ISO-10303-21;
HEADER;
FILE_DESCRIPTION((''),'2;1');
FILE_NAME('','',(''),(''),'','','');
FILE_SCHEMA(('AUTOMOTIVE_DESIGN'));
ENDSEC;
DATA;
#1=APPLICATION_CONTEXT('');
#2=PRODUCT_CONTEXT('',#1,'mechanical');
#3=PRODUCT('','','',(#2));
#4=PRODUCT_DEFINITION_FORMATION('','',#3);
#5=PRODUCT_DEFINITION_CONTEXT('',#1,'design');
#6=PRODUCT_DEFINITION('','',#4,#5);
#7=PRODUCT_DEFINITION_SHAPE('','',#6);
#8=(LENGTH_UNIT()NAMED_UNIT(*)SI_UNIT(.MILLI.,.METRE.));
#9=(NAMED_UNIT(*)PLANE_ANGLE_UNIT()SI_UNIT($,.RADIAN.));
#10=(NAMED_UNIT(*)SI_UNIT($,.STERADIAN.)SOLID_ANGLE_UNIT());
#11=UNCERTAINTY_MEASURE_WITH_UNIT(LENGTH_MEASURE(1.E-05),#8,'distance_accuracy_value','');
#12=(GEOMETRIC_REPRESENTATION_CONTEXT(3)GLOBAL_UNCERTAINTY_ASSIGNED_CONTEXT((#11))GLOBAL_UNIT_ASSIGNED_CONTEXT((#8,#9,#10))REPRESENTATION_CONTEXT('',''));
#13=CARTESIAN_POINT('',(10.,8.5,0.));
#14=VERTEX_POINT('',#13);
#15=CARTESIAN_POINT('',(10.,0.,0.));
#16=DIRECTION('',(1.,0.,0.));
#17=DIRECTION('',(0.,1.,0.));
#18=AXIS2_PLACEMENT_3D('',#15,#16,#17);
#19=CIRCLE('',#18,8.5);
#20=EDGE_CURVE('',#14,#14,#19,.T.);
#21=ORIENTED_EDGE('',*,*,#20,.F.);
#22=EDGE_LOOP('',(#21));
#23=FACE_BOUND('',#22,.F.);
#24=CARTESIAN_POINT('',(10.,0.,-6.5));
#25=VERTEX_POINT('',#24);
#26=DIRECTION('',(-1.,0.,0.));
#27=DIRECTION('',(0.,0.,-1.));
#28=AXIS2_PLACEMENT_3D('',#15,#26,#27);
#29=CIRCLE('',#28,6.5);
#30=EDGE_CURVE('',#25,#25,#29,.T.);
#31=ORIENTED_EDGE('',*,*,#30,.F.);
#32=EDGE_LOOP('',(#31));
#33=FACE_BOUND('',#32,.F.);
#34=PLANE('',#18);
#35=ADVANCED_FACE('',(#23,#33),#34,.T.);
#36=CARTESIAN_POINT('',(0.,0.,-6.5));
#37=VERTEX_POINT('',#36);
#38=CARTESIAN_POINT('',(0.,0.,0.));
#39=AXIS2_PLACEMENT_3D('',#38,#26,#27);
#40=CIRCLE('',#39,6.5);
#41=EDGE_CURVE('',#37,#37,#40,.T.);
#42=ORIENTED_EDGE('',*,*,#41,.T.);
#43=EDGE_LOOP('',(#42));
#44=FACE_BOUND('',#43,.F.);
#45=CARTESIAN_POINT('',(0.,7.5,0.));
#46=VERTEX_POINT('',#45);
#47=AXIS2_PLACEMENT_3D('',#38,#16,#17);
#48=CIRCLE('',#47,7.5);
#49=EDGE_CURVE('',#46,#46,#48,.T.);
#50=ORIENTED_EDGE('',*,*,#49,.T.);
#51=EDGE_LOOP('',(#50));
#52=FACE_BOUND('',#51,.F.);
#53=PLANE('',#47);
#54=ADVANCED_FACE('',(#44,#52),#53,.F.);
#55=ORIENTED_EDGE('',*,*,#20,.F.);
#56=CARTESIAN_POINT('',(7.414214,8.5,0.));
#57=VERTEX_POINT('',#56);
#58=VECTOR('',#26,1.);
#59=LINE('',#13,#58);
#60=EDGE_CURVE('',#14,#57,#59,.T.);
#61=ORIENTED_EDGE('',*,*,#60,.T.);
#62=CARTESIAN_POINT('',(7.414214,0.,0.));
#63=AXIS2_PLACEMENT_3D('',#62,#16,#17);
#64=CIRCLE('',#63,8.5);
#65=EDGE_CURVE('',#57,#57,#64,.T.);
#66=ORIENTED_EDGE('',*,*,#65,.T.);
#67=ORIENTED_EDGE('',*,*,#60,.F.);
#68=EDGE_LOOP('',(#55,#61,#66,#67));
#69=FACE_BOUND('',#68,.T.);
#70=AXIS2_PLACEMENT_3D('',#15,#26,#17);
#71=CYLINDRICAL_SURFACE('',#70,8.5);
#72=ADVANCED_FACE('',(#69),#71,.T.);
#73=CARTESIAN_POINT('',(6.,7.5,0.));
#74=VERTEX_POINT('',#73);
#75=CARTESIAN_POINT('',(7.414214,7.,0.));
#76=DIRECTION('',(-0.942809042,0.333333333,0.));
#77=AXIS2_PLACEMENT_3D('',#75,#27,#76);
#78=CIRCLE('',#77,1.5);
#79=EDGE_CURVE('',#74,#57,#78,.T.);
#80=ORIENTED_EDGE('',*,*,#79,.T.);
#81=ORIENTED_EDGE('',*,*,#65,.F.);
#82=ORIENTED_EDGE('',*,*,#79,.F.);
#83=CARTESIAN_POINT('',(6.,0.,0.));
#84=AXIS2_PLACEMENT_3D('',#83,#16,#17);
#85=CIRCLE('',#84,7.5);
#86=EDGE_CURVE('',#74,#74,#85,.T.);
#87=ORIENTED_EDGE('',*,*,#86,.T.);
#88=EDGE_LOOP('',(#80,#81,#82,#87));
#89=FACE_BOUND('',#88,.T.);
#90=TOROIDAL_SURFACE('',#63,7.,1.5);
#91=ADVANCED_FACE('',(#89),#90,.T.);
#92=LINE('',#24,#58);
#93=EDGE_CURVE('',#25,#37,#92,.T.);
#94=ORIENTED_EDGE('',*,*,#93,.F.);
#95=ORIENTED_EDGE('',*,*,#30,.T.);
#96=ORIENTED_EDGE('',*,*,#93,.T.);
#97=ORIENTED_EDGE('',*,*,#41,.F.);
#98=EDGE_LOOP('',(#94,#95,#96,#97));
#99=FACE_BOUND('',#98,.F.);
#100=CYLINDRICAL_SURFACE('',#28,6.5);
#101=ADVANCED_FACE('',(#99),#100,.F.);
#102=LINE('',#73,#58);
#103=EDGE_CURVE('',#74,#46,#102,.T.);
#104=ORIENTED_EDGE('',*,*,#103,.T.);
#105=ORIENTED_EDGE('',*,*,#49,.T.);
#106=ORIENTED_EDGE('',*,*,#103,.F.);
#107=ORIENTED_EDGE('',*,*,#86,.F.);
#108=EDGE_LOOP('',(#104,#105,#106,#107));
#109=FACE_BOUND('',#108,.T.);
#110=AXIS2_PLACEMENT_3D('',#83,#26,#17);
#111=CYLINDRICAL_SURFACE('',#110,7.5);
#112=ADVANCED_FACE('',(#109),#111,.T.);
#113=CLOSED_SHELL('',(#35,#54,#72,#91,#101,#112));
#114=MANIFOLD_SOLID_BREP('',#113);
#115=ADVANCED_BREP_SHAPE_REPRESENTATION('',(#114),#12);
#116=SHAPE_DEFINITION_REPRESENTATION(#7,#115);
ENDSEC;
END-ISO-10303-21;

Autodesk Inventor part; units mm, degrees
ref_plane "YZ Plane" through (0, 0, 0) normal (1, 0, 0) x (0, 1, 0)
ref_plane "XZ Plane" through (0, 0, 0) normal (0, 1, 0) x (-1, 0, 0)
ref_plane "XY Plane" through (0, 0, 0) normal (0, 0, 1) x (1, 0, 0)
sketch "Sketch1" plane through (0, 0, 0) normal (0, 0, 1) x (1, 0, 0)
  line L0 (0, 0) -> (6, 0)
  line L1 (6, 0) -> (6, 7.5)
  line L2 (6, 7.5) -> (0, 7.5)
  line L3 (0, 7.5) -> (0, 0)
  line L4 (6, 0) -> (10, 0)
  line L5 (10, 0) -> (10, 8.5)
  line L6 (10, 8.5) -> (6, 8.5)
  line L7 (6, 8.5) -> (6, 0)
  dimension "d0" = 15
  dimension "d1" = 17
  dimension "d2" = 6
  dimension "d3" = 10
revolve "Revolution1" add sketch "Sketch1" angle 360 about axis through (0, 0, 0) along (1, 0, 0)
fillet "Fillet1" radius 1.5 1 edges at (6, -8.5, 0)
hole "Hole1" at (10, 0, 0) direction (-1, 0, 0) diameter 13 end through all
properties part number "405-03" material "Steel, Mild"
